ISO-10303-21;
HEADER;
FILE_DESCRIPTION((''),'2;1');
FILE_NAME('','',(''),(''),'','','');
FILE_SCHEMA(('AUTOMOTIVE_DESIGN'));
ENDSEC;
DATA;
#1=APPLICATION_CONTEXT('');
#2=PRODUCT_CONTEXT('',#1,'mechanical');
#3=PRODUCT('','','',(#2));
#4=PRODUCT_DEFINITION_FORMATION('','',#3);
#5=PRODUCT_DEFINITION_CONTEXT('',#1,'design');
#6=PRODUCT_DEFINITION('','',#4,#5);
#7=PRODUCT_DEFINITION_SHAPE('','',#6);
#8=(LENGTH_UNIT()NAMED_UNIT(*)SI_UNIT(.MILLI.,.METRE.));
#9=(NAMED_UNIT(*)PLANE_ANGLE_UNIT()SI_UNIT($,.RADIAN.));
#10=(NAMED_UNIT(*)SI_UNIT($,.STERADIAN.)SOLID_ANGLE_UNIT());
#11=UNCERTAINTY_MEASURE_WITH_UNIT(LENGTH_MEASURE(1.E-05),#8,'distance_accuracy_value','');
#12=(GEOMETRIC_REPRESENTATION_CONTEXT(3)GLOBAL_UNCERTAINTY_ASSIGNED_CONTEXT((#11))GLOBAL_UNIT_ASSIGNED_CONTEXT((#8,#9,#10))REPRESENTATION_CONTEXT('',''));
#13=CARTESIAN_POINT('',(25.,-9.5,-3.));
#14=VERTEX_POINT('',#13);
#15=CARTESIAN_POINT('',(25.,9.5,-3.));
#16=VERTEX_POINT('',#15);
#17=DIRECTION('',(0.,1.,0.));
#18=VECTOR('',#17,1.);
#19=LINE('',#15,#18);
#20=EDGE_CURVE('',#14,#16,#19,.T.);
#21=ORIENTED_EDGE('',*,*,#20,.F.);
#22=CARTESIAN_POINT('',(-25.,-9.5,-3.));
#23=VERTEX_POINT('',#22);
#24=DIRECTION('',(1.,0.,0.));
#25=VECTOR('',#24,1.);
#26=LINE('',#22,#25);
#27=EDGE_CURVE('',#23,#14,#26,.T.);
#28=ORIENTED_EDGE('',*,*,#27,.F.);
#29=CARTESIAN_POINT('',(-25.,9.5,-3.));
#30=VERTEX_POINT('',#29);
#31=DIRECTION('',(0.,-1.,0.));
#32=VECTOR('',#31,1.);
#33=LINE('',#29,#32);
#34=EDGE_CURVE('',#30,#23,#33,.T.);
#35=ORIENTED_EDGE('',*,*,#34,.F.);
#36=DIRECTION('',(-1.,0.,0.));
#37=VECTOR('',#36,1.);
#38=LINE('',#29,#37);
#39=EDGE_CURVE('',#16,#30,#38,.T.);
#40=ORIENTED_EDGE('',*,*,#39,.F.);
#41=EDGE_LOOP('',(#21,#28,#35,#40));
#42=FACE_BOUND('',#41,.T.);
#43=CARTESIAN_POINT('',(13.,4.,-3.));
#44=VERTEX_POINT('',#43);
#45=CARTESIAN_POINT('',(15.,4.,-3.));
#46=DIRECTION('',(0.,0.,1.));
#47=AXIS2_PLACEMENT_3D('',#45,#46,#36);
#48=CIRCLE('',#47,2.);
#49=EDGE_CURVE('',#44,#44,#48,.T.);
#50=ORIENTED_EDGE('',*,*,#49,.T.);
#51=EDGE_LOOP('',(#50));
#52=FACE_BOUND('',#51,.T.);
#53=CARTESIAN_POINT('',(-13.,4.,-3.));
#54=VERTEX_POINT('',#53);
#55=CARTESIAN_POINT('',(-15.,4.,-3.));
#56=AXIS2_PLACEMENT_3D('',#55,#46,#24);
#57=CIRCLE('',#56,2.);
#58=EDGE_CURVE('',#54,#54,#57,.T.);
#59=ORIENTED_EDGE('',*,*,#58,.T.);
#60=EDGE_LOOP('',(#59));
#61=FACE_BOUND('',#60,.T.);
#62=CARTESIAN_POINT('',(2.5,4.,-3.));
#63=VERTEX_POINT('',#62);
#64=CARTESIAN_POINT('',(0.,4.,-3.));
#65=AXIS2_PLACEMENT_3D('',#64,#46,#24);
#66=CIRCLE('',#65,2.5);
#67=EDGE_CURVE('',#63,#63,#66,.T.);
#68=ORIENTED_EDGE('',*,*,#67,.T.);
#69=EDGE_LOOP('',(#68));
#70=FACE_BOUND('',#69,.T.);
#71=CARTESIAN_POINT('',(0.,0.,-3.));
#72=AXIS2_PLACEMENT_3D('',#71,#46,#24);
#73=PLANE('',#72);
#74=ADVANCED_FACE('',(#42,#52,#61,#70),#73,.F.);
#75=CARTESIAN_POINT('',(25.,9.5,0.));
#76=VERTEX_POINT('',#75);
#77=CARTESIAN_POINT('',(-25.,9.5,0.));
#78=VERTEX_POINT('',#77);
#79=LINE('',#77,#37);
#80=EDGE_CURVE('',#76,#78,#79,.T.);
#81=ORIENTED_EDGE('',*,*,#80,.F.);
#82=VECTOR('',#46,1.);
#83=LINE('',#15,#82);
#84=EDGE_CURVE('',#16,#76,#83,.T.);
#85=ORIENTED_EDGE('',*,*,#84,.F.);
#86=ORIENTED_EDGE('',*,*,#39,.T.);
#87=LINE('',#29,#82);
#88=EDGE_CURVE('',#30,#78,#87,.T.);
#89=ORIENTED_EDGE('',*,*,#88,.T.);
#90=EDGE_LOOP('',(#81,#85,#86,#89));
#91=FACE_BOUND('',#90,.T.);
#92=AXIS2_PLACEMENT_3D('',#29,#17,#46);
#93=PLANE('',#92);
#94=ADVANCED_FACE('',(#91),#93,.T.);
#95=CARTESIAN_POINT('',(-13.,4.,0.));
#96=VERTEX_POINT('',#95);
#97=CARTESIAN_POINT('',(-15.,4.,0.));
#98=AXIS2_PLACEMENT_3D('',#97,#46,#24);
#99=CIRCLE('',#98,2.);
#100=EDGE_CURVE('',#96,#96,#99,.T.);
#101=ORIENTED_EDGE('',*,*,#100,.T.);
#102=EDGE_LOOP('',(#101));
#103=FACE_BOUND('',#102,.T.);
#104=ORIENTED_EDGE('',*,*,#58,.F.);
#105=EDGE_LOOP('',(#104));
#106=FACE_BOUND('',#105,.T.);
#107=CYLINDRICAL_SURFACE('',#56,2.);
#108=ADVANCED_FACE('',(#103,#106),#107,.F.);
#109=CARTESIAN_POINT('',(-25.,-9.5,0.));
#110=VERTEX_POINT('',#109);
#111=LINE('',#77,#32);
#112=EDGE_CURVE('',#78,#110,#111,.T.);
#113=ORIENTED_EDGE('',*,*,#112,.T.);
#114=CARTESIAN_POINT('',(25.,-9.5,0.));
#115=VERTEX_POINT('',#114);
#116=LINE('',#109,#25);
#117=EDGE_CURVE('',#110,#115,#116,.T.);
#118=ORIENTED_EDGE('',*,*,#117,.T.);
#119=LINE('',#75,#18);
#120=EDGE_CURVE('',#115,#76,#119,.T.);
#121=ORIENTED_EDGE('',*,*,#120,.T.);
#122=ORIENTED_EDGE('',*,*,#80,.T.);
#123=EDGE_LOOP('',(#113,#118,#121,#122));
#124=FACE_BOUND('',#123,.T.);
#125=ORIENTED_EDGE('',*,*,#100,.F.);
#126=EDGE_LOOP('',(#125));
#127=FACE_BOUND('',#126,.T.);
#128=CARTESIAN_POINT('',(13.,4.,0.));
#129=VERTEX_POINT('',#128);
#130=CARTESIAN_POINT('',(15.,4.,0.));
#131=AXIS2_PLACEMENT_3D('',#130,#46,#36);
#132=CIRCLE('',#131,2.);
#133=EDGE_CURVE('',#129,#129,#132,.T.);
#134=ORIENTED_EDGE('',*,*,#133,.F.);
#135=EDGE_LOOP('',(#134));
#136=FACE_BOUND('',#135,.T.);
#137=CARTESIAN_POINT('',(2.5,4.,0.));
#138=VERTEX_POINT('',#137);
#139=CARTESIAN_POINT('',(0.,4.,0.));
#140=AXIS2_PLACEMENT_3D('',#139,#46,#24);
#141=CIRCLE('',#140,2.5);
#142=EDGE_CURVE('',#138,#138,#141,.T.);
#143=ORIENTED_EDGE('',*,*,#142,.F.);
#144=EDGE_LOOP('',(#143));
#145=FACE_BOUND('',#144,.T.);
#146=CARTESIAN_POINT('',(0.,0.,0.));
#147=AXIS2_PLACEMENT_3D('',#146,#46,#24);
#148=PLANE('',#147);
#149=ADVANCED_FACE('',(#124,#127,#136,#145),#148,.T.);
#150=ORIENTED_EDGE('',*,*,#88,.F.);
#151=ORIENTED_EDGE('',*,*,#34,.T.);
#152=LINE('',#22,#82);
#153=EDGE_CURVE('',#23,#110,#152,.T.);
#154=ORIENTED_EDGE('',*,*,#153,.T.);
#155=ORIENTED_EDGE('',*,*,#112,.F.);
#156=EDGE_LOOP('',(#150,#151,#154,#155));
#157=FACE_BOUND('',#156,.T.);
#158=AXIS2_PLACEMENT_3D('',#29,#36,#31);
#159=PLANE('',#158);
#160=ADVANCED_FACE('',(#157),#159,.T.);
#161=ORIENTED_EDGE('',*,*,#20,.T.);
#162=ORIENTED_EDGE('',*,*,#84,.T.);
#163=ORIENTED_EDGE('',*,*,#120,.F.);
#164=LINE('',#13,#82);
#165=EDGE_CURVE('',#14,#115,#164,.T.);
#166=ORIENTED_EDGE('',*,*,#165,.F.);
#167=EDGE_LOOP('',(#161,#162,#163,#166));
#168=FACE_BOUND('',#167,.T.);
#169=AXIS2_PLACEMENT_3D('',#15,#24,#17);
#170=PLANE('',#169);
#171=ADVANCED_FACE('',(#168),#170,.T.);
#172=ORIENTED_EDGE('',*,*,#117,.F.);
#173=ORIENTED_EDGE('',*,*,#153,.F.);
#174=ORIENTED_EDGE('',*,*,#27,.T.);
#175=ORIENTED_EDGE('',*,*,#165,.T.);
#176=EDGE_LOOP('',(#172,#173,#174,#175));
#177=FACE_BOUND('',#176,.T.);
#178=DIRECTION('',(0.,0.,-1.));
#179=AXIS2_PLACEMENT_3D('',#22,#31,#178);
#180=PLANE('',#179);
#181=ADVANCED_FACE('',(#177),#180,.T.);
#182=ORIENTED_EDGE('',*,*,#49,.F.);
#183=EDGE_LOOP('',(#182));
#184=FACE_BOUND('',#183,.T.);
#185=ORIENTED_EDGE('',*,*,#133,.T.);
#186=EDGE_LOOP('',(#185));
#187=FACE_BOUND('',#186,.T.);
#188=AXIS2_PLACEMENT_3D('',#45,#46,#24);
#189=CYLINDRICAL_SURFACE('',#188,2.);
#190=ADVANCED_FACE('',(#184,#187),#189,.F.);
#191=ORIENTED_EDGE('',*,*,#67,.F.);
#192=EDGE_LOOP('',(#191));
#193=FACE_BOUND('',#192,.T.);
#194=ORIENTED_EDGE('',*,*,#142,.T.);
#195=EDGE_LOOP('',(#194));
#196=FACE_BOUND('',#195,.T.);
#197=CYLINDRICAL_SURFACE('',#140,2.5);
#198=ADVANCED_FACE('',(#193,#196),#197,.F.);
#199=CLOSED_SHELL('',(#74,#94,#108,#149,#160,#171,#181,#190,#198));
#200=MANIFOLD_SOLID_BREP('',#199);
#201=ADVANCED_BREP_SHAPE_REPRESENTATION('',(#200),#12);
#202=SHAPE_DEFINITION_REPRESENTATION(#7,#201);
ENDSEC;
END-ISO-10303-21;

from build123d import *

# Parameters (mm, degrees)
SKETCH_1_W             = 50
SKETCH_1_H             = 19
SKETCH_1_R             = 2
SM_BASE_FLANGE_1_DEPTH = 3
HOLE_WIZARD_M6_1_D     = 5


# Sheet-metal steps are written as plain solids
with BuildPart() as part:
    # Sketch 1 → 基体-法兰1 (new body)
    with BuildSketch(Plane.XY):
        Rectangle(SKETCH_1_W, SKETCH_1_H)
        with Locations((-15, 4)):
            Circle(SKETCH_1_R, mode=Mode.SUBTRACT)
        with Locations(Location((15, 4, 0), (0, 0, 180))):
            Circle(SKETCH_1_R, mode=Mode.SUBTRACT)
    extrude(amount=-SM_BASE_FLANGE_1_DEPTH)

    # M6 螺纹孔1 (through all)
    with Locations(Plane.XY):
        with Locations((0, 4)):
            Hole(HOLE_WIZARD_M6_1_D / 2)


solid = part.part
